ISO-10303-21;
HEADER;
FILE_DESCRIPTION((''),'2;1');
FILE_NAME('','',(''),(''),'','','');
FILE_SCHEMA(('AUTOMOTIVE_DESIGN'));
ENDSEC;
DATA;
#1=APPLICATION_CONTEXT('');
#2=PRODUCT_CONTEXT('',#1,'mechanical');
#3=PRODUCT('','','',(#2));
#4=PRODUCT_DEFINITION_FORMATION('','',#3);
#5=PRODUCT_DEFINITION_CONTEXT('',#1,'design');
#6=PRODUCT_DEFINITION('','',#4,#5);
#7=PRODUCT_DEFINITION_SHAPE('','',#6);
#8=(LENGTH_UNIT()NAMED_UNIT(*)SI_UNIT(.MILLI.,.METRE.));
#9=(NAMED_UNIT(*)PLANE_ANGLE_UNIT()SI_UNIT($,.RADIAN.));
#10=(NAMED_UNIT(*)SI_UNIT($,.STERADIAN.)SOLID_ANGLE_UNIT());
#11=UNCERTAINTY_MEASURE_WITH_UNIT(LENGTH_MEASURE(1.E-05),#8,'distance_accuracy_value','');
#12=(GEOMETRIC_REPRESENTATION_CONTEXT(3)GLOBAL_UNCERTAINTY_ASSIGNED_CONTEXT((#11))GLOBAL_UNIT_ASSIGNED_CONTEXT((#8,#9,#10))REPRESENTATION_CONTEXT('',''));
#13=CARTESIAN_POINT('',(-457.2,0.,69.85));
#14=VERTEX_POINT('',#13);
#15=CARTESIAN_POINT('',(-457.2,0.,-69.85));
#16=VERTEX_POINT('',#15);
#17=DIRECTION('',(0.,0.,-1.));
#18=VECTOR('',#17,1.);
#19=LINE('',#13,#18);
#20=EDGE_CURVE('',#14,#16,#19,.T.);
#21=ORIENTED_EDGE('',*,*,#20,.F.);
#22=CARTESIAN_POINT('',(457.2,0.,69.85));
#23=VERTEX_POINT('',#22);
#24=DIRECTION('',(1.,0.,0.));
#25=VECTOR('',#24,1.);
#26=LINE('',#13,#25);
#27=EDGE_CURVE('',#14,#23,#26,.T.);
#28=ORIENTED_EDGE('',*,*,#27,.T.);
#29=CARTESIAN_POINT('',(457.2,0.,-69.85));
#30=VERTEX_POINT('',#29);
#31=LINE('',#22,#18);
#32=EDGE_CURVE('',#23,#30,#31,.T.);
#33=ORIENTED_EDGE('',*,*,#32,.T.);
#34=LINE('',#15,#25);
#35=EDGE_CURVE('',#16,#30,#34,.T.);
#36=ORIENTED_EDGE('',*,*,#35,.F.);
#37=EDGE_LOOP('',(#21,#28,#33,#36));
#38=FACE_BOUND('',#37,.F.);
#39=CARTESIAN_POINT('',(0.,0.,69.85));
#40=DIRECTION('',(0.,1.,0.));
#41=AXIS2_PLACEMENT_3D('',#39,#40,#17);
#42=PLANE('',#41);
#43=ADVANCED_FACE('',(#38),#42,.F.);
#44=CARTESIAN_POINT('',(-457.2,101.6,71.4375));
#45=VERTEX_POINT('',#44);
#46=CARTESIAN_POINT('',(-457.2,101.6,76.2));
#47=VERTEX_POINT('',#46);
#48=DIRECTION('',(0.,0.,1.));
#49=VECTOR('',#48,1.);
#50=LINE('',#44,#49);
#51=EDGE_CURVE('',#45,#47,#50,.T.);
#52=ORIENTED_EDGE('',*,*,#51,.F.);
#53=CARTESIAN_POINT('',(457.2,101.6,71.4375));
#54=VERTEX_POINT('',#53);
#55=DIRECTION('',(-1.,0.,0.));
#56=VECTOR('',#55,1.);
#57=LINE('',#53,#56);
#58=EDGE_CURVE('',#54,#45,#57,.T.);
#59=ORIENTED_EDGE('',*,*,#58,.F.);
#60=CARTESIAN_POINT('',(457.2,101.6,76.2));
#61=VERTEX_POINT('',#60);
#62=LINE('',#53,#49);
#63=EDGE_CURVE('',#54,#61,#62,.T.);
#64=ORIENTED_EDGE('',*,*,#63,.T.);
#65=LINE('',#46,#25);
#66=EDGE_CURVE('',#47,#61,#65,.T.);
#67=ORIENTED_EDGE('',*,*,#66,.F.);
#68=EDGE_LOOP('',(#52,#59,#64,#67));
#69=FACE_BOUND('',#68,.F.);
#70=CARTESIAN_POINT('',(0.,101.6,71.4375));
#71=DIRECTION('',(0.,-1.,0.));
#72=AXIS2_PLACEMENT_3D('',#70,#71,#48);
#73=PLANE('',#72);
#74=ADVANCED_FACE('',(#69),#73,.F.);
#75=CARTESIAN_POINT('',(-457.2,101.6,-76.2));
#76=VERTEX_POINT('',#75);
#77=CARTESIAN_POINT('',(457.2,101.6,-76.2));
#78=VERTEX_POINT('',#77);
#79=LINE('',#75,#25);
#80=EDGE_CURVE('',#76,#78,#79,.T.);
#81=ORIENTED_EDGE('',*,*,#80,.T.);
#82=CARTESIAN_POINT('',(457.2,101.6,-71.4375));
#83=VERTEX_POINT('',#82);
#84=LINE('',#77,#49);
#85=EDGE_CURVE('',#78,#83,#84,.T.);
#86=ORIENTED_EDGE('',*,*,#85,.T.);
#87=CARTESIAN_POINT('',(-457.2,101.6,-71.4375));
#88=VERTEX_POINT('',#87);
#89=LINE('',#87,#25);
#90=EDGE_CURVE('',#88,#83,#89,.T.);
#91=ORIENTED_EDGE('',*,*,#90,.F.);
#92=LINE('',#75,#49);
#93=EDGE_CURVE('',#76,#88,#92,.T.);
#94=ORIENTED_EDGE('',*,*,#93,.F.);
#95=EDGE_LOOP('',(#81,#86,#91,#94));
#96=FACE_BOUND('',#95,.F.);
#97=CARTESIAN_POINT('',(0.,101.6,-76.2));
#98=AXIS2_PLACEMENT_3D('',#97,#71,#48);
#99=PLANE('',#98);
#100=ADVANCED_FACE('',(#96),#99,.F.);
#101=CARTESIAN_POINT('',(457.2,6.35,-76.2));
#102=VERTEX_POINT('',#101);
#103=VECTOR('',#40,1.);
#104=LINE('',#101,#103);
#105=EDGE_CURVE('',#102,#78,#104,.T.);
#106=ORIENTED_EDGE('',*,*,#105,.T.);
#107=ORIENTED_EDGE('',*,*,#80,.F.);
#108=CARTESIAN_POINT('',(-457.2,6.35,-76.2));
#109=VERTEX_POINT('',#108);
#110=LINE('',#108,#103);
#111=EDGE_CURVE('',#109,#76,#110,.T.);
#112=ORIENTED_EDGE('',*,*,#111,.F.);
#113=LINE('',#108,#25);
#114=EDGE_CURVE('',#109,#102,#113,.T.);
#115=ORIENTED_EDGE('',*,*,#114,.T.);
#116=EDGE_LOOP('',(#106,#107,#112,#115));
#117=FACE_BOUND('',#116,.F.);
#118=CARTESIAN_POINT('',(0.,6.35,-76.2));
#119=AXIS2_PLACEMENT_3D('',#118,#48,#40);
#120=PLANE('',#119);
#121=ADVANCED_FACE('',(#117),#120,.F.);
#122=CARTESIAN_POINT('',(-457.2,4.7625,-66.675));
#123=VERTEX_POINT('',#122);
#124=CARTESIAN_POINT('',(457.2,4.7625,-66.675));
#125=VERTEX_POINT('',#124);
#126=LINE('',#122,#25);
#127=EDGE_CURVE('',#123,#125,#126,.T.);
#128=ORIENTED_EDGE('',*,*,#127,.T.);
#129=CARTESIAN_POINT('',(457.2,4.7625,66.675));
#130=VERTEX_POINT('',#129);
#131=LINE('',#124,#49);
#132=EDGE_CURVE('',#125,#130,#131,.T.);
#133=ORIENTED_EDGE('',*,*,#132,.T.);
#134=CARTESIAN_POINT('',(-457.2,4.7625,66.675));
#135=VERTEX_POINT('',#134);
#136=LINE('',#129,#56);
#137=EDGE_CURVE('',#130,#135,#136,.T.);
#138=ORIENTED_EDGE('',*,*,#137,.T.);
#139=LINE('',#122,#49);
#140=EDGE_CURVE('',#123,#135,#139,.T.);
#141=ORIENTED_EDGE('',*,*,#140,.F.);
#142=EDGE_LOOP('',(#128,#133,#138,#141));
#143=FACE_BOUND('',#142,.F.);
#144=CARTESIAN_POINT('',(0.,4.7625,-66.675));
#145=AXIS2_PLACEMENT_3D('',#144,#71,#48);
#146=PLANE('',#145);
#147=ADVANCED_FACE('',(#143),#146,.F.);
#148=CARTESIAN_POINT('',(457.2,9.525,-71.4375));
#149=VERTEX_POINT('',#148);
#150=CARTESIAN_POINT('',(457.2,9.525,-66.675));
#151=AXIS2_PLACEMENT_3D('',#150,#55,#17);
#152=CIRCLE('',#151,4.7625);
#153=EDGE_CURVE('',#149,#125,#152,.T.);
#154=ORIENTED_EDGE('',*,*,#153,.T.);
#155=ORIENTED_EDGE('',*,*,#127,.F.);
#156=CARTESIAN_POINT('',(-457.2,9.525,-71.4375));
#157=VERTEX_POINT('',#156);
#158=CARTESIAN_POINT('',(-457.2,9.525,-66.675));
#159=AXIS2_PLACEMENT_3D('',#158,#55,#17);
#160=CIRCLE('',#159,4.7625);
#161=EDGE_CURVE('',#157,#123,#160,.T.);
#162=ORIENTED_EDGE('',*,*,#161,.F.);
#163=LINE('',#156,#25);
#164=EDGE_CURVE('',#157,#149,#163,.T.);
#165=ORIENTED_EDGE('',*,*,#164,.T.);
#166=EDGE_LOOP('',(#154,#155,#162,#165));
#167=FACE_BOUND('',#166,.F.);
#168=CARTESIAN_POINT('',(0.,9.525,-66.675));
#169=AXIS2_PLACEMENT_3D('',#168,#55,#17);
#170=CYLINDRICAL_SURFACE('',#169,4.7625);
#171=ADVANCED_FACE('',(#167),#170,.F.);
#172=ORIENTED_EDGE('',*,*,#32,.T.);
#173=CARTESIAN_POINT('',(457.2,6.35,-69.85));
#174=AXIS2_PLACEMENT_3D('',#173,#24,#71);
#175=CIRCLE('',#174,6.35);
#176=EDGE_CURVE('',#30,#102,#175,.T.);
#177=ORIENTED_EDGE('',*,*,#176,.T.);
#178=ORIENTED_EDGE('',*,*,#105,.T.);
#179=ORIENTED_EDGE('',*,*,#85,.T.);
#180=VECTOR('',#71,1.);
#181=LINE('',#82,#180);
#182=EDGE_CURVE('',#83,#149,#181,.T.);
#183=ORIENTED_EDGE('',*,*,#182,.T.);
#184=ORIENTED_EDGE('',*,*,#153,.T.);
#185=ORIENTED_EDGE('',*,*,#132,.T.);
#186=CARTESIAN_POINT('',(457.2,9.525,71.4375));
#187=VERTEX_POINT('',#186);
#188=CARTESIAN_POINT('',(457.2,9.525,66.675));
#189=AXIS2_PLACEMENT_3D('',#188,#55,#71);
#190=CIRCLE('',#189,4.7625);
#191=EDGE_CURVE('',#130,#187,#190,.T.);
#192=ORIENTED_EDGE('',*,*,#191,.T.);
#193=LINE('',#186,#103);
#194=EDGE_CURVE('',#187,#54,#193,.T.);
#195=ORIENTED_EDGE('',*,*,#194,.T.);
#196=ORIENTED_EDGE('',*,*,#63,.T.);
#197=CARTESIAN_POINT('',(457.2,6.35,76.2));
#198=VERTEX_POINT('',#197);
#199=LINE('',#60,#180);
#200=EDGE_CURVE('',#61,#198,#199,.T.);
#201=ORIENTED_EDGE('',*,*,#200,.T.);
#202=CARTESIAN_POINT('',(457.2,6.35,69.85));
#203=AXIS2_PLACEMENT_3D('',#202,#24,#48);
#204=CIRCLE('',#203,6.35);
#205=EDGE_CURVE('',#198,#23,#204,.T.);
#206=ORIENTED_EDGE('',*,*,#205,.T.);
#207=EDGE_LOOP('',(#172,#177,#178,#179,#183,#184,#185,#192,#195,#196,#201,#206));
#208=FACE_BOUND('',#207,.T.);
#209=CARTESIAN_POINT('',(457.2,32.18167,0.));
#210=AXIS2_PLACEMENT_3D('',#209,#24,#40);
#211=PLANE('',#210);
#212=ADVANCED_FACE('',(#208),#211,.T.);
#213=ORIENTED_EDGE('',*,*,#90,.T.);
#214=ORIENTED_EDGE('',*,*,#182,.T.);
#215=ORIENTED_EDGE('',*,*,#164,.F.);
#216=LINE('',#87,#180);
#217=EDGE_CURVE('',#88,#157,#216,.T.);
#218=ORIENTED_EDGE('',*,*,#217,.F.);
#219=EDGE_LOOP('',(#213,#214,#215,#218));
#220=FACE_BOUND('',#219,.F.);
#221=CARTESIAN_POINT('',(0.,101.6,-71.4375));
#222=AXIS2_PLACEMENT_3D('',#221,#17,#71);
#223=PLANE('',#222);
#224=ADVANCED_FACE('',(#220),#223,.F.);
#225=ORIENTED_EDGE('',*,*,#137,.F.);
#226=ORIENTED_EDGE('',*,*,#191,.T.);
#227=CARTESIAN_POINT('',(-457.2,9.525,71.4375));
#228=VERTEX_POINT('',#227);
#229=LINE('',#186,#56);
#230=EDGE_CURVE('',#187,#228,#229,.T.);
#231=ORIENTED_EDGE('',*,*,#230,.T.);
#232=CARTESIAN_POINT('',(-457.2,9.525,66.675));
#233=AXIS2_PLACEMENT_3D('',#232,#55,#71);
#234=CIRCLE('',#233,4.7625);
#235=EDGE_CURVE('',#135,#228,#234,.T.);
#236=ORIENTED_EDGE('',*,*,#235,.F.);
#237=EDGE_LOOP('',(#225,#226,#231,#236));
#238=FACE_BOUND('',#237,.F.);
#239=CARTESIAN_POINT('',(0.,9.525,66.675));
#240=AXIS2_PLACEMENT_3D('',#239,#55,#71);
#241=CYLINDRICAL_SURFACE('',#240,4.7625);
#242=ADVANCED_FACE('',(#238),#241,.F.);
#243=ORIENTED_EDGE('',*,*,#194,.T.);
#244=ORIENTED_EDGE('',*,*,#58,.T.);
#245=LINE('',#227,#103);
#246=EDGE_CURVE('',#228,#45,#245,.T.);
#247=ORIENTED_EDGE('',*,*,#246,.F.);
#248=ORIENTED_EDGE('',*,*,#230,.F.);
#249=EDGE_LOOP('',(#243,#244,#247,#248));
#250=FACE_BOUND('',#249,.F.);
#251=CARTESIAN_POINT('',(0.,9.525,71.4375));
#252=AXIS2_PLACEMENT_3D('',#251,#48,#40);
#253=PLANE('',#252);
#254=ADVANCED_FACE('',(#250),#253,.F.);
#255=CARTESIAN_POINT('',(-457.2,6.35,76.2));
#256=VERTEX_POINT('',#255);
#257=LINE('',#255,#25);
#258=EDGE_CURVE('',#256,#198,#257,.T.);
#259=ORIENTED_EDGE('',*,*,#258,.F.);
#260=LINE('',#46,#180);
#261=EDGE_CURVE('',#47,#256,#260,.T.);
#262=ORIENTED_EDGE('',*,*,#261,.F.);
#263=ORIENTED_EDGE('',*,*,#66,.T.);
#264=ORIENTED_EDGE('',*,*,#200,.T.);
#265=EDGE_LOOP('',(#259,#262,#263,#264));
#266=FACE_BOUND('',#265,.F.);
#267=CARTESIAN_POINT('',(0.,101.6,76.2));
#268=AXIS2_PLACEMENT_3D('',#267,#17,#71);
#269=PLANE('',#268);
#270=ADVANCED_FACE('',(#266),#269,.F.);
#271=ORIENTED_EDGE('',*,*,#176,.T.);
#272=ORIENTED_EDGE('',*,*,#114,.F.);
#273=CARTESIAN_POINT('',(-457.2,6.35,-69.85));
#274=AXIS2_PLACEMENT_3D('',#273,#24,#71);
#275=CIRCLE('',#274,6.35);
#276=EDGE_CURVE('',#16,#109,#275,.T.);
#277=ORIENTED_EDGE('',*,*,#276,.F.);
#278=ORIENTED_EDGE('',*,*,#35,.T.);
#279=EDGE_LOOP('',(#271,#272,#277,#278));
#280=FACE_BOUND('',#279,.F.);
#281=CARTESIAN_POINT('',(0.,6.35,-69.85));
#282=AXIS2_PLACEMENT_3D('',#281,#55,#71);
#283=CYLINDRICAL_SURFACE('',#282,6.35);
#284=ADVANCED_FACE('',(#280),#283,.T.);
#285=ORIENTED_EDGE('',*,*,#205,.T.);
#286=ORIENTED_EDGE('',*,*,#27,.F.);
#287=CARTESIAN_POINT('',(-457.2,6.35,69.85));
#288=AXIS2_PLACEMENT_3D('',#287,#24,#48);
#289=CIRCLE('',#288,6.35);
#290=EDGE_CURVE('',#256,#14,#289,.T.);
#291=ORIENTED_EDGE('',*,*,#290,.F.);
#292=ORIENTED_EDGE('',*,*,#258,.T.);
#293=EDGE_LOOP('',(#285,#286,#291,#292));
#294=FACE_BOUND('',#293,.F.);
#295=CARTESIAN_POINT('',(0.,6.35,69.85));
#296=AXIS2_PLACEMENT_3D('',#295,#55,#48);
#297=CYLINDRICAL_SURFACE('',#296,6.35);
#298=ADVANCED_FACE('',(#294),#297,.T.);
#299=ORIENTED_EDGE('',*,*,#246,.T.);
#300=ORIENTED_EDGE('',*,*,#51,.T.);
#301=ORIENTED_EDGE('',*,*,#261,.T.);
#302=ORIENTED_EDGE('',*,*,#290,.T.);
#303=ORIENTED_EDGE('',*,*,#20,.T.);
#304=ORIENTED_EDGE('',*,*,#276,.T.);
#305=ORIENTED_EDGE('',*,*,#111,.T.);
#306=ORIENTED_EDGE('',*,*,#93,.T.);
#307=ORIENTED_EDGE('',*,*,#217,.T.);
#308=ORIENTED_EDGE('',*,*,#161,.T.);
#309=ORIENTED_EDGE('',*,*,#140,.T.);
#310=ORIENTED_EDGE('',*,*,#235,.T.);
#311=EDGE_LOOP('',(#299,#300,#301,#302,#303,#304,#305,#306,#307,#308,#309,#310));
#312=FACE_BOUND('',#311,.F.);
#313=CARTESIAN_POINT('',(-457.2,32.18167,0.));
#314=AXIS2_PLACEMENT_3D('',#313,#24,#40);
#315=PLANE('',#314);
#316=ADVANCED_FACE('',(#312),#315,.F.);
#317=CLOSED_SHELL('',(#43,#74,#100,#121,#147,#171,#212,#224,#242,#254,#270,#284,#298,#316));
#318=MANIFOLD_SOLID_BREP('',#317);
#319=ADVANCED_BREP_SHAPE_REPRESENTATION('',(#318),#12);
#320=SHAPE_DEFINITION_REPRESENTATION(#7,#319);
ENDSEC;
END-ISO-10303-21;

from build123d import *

# Parameters (mm, degrees)
F1_DEPTH      = 457.2
F1_DEPTH_BACK = 457.2


with BuildPart() as f1:
    # F0 (on Right) → F1 (new body, two sides)
    with BuildSketch(Plane.YZ) as f1_sk:
        with BuildLine():
            Line((101.6, 71.4375), (101.6, 76.2))
            Line((101.6, 76.2), (6.35, 76.2))
            ThreePointArc((6.35, 76.2), (1.8598719395, 74.3401280605), (0, 69.85))
            Line((0, 69.85), (0, 0))
            Line((0, 0), (0, -69.85))
            ThreePointArc((0, -69.85), (1.8598719395, -74.3401280605), (6.35, -76.2))
            Line((6.35, -76.2), (101.6, -76.2))
            Line((101.6, -76.2), (101.6, -71.4375))
            Line((101.6, -71.4375), (9.525, -71.4375))
            ThreePointArc((9.525, -71.4375), (6.1574039546, -70.0425960454), (4.7625, -66.675))
            Line((4.7625, -66.675), (4.7625, 0))
            Line((4.7625, 0), (4.7625, 66.675))
            ThreePointArc((4.7625, 66.675), (6.1574039546, 70.0425960454), (9.525, 71.4375))
            Line((9.525, 71.4375), (101.6, 71.4375))
        make_face()
    extrude(amount=-F1_DEPTH)
    extrude(f1_sk.sketch, amount=F1_DEPTH_BACK)


solid = f1.part
